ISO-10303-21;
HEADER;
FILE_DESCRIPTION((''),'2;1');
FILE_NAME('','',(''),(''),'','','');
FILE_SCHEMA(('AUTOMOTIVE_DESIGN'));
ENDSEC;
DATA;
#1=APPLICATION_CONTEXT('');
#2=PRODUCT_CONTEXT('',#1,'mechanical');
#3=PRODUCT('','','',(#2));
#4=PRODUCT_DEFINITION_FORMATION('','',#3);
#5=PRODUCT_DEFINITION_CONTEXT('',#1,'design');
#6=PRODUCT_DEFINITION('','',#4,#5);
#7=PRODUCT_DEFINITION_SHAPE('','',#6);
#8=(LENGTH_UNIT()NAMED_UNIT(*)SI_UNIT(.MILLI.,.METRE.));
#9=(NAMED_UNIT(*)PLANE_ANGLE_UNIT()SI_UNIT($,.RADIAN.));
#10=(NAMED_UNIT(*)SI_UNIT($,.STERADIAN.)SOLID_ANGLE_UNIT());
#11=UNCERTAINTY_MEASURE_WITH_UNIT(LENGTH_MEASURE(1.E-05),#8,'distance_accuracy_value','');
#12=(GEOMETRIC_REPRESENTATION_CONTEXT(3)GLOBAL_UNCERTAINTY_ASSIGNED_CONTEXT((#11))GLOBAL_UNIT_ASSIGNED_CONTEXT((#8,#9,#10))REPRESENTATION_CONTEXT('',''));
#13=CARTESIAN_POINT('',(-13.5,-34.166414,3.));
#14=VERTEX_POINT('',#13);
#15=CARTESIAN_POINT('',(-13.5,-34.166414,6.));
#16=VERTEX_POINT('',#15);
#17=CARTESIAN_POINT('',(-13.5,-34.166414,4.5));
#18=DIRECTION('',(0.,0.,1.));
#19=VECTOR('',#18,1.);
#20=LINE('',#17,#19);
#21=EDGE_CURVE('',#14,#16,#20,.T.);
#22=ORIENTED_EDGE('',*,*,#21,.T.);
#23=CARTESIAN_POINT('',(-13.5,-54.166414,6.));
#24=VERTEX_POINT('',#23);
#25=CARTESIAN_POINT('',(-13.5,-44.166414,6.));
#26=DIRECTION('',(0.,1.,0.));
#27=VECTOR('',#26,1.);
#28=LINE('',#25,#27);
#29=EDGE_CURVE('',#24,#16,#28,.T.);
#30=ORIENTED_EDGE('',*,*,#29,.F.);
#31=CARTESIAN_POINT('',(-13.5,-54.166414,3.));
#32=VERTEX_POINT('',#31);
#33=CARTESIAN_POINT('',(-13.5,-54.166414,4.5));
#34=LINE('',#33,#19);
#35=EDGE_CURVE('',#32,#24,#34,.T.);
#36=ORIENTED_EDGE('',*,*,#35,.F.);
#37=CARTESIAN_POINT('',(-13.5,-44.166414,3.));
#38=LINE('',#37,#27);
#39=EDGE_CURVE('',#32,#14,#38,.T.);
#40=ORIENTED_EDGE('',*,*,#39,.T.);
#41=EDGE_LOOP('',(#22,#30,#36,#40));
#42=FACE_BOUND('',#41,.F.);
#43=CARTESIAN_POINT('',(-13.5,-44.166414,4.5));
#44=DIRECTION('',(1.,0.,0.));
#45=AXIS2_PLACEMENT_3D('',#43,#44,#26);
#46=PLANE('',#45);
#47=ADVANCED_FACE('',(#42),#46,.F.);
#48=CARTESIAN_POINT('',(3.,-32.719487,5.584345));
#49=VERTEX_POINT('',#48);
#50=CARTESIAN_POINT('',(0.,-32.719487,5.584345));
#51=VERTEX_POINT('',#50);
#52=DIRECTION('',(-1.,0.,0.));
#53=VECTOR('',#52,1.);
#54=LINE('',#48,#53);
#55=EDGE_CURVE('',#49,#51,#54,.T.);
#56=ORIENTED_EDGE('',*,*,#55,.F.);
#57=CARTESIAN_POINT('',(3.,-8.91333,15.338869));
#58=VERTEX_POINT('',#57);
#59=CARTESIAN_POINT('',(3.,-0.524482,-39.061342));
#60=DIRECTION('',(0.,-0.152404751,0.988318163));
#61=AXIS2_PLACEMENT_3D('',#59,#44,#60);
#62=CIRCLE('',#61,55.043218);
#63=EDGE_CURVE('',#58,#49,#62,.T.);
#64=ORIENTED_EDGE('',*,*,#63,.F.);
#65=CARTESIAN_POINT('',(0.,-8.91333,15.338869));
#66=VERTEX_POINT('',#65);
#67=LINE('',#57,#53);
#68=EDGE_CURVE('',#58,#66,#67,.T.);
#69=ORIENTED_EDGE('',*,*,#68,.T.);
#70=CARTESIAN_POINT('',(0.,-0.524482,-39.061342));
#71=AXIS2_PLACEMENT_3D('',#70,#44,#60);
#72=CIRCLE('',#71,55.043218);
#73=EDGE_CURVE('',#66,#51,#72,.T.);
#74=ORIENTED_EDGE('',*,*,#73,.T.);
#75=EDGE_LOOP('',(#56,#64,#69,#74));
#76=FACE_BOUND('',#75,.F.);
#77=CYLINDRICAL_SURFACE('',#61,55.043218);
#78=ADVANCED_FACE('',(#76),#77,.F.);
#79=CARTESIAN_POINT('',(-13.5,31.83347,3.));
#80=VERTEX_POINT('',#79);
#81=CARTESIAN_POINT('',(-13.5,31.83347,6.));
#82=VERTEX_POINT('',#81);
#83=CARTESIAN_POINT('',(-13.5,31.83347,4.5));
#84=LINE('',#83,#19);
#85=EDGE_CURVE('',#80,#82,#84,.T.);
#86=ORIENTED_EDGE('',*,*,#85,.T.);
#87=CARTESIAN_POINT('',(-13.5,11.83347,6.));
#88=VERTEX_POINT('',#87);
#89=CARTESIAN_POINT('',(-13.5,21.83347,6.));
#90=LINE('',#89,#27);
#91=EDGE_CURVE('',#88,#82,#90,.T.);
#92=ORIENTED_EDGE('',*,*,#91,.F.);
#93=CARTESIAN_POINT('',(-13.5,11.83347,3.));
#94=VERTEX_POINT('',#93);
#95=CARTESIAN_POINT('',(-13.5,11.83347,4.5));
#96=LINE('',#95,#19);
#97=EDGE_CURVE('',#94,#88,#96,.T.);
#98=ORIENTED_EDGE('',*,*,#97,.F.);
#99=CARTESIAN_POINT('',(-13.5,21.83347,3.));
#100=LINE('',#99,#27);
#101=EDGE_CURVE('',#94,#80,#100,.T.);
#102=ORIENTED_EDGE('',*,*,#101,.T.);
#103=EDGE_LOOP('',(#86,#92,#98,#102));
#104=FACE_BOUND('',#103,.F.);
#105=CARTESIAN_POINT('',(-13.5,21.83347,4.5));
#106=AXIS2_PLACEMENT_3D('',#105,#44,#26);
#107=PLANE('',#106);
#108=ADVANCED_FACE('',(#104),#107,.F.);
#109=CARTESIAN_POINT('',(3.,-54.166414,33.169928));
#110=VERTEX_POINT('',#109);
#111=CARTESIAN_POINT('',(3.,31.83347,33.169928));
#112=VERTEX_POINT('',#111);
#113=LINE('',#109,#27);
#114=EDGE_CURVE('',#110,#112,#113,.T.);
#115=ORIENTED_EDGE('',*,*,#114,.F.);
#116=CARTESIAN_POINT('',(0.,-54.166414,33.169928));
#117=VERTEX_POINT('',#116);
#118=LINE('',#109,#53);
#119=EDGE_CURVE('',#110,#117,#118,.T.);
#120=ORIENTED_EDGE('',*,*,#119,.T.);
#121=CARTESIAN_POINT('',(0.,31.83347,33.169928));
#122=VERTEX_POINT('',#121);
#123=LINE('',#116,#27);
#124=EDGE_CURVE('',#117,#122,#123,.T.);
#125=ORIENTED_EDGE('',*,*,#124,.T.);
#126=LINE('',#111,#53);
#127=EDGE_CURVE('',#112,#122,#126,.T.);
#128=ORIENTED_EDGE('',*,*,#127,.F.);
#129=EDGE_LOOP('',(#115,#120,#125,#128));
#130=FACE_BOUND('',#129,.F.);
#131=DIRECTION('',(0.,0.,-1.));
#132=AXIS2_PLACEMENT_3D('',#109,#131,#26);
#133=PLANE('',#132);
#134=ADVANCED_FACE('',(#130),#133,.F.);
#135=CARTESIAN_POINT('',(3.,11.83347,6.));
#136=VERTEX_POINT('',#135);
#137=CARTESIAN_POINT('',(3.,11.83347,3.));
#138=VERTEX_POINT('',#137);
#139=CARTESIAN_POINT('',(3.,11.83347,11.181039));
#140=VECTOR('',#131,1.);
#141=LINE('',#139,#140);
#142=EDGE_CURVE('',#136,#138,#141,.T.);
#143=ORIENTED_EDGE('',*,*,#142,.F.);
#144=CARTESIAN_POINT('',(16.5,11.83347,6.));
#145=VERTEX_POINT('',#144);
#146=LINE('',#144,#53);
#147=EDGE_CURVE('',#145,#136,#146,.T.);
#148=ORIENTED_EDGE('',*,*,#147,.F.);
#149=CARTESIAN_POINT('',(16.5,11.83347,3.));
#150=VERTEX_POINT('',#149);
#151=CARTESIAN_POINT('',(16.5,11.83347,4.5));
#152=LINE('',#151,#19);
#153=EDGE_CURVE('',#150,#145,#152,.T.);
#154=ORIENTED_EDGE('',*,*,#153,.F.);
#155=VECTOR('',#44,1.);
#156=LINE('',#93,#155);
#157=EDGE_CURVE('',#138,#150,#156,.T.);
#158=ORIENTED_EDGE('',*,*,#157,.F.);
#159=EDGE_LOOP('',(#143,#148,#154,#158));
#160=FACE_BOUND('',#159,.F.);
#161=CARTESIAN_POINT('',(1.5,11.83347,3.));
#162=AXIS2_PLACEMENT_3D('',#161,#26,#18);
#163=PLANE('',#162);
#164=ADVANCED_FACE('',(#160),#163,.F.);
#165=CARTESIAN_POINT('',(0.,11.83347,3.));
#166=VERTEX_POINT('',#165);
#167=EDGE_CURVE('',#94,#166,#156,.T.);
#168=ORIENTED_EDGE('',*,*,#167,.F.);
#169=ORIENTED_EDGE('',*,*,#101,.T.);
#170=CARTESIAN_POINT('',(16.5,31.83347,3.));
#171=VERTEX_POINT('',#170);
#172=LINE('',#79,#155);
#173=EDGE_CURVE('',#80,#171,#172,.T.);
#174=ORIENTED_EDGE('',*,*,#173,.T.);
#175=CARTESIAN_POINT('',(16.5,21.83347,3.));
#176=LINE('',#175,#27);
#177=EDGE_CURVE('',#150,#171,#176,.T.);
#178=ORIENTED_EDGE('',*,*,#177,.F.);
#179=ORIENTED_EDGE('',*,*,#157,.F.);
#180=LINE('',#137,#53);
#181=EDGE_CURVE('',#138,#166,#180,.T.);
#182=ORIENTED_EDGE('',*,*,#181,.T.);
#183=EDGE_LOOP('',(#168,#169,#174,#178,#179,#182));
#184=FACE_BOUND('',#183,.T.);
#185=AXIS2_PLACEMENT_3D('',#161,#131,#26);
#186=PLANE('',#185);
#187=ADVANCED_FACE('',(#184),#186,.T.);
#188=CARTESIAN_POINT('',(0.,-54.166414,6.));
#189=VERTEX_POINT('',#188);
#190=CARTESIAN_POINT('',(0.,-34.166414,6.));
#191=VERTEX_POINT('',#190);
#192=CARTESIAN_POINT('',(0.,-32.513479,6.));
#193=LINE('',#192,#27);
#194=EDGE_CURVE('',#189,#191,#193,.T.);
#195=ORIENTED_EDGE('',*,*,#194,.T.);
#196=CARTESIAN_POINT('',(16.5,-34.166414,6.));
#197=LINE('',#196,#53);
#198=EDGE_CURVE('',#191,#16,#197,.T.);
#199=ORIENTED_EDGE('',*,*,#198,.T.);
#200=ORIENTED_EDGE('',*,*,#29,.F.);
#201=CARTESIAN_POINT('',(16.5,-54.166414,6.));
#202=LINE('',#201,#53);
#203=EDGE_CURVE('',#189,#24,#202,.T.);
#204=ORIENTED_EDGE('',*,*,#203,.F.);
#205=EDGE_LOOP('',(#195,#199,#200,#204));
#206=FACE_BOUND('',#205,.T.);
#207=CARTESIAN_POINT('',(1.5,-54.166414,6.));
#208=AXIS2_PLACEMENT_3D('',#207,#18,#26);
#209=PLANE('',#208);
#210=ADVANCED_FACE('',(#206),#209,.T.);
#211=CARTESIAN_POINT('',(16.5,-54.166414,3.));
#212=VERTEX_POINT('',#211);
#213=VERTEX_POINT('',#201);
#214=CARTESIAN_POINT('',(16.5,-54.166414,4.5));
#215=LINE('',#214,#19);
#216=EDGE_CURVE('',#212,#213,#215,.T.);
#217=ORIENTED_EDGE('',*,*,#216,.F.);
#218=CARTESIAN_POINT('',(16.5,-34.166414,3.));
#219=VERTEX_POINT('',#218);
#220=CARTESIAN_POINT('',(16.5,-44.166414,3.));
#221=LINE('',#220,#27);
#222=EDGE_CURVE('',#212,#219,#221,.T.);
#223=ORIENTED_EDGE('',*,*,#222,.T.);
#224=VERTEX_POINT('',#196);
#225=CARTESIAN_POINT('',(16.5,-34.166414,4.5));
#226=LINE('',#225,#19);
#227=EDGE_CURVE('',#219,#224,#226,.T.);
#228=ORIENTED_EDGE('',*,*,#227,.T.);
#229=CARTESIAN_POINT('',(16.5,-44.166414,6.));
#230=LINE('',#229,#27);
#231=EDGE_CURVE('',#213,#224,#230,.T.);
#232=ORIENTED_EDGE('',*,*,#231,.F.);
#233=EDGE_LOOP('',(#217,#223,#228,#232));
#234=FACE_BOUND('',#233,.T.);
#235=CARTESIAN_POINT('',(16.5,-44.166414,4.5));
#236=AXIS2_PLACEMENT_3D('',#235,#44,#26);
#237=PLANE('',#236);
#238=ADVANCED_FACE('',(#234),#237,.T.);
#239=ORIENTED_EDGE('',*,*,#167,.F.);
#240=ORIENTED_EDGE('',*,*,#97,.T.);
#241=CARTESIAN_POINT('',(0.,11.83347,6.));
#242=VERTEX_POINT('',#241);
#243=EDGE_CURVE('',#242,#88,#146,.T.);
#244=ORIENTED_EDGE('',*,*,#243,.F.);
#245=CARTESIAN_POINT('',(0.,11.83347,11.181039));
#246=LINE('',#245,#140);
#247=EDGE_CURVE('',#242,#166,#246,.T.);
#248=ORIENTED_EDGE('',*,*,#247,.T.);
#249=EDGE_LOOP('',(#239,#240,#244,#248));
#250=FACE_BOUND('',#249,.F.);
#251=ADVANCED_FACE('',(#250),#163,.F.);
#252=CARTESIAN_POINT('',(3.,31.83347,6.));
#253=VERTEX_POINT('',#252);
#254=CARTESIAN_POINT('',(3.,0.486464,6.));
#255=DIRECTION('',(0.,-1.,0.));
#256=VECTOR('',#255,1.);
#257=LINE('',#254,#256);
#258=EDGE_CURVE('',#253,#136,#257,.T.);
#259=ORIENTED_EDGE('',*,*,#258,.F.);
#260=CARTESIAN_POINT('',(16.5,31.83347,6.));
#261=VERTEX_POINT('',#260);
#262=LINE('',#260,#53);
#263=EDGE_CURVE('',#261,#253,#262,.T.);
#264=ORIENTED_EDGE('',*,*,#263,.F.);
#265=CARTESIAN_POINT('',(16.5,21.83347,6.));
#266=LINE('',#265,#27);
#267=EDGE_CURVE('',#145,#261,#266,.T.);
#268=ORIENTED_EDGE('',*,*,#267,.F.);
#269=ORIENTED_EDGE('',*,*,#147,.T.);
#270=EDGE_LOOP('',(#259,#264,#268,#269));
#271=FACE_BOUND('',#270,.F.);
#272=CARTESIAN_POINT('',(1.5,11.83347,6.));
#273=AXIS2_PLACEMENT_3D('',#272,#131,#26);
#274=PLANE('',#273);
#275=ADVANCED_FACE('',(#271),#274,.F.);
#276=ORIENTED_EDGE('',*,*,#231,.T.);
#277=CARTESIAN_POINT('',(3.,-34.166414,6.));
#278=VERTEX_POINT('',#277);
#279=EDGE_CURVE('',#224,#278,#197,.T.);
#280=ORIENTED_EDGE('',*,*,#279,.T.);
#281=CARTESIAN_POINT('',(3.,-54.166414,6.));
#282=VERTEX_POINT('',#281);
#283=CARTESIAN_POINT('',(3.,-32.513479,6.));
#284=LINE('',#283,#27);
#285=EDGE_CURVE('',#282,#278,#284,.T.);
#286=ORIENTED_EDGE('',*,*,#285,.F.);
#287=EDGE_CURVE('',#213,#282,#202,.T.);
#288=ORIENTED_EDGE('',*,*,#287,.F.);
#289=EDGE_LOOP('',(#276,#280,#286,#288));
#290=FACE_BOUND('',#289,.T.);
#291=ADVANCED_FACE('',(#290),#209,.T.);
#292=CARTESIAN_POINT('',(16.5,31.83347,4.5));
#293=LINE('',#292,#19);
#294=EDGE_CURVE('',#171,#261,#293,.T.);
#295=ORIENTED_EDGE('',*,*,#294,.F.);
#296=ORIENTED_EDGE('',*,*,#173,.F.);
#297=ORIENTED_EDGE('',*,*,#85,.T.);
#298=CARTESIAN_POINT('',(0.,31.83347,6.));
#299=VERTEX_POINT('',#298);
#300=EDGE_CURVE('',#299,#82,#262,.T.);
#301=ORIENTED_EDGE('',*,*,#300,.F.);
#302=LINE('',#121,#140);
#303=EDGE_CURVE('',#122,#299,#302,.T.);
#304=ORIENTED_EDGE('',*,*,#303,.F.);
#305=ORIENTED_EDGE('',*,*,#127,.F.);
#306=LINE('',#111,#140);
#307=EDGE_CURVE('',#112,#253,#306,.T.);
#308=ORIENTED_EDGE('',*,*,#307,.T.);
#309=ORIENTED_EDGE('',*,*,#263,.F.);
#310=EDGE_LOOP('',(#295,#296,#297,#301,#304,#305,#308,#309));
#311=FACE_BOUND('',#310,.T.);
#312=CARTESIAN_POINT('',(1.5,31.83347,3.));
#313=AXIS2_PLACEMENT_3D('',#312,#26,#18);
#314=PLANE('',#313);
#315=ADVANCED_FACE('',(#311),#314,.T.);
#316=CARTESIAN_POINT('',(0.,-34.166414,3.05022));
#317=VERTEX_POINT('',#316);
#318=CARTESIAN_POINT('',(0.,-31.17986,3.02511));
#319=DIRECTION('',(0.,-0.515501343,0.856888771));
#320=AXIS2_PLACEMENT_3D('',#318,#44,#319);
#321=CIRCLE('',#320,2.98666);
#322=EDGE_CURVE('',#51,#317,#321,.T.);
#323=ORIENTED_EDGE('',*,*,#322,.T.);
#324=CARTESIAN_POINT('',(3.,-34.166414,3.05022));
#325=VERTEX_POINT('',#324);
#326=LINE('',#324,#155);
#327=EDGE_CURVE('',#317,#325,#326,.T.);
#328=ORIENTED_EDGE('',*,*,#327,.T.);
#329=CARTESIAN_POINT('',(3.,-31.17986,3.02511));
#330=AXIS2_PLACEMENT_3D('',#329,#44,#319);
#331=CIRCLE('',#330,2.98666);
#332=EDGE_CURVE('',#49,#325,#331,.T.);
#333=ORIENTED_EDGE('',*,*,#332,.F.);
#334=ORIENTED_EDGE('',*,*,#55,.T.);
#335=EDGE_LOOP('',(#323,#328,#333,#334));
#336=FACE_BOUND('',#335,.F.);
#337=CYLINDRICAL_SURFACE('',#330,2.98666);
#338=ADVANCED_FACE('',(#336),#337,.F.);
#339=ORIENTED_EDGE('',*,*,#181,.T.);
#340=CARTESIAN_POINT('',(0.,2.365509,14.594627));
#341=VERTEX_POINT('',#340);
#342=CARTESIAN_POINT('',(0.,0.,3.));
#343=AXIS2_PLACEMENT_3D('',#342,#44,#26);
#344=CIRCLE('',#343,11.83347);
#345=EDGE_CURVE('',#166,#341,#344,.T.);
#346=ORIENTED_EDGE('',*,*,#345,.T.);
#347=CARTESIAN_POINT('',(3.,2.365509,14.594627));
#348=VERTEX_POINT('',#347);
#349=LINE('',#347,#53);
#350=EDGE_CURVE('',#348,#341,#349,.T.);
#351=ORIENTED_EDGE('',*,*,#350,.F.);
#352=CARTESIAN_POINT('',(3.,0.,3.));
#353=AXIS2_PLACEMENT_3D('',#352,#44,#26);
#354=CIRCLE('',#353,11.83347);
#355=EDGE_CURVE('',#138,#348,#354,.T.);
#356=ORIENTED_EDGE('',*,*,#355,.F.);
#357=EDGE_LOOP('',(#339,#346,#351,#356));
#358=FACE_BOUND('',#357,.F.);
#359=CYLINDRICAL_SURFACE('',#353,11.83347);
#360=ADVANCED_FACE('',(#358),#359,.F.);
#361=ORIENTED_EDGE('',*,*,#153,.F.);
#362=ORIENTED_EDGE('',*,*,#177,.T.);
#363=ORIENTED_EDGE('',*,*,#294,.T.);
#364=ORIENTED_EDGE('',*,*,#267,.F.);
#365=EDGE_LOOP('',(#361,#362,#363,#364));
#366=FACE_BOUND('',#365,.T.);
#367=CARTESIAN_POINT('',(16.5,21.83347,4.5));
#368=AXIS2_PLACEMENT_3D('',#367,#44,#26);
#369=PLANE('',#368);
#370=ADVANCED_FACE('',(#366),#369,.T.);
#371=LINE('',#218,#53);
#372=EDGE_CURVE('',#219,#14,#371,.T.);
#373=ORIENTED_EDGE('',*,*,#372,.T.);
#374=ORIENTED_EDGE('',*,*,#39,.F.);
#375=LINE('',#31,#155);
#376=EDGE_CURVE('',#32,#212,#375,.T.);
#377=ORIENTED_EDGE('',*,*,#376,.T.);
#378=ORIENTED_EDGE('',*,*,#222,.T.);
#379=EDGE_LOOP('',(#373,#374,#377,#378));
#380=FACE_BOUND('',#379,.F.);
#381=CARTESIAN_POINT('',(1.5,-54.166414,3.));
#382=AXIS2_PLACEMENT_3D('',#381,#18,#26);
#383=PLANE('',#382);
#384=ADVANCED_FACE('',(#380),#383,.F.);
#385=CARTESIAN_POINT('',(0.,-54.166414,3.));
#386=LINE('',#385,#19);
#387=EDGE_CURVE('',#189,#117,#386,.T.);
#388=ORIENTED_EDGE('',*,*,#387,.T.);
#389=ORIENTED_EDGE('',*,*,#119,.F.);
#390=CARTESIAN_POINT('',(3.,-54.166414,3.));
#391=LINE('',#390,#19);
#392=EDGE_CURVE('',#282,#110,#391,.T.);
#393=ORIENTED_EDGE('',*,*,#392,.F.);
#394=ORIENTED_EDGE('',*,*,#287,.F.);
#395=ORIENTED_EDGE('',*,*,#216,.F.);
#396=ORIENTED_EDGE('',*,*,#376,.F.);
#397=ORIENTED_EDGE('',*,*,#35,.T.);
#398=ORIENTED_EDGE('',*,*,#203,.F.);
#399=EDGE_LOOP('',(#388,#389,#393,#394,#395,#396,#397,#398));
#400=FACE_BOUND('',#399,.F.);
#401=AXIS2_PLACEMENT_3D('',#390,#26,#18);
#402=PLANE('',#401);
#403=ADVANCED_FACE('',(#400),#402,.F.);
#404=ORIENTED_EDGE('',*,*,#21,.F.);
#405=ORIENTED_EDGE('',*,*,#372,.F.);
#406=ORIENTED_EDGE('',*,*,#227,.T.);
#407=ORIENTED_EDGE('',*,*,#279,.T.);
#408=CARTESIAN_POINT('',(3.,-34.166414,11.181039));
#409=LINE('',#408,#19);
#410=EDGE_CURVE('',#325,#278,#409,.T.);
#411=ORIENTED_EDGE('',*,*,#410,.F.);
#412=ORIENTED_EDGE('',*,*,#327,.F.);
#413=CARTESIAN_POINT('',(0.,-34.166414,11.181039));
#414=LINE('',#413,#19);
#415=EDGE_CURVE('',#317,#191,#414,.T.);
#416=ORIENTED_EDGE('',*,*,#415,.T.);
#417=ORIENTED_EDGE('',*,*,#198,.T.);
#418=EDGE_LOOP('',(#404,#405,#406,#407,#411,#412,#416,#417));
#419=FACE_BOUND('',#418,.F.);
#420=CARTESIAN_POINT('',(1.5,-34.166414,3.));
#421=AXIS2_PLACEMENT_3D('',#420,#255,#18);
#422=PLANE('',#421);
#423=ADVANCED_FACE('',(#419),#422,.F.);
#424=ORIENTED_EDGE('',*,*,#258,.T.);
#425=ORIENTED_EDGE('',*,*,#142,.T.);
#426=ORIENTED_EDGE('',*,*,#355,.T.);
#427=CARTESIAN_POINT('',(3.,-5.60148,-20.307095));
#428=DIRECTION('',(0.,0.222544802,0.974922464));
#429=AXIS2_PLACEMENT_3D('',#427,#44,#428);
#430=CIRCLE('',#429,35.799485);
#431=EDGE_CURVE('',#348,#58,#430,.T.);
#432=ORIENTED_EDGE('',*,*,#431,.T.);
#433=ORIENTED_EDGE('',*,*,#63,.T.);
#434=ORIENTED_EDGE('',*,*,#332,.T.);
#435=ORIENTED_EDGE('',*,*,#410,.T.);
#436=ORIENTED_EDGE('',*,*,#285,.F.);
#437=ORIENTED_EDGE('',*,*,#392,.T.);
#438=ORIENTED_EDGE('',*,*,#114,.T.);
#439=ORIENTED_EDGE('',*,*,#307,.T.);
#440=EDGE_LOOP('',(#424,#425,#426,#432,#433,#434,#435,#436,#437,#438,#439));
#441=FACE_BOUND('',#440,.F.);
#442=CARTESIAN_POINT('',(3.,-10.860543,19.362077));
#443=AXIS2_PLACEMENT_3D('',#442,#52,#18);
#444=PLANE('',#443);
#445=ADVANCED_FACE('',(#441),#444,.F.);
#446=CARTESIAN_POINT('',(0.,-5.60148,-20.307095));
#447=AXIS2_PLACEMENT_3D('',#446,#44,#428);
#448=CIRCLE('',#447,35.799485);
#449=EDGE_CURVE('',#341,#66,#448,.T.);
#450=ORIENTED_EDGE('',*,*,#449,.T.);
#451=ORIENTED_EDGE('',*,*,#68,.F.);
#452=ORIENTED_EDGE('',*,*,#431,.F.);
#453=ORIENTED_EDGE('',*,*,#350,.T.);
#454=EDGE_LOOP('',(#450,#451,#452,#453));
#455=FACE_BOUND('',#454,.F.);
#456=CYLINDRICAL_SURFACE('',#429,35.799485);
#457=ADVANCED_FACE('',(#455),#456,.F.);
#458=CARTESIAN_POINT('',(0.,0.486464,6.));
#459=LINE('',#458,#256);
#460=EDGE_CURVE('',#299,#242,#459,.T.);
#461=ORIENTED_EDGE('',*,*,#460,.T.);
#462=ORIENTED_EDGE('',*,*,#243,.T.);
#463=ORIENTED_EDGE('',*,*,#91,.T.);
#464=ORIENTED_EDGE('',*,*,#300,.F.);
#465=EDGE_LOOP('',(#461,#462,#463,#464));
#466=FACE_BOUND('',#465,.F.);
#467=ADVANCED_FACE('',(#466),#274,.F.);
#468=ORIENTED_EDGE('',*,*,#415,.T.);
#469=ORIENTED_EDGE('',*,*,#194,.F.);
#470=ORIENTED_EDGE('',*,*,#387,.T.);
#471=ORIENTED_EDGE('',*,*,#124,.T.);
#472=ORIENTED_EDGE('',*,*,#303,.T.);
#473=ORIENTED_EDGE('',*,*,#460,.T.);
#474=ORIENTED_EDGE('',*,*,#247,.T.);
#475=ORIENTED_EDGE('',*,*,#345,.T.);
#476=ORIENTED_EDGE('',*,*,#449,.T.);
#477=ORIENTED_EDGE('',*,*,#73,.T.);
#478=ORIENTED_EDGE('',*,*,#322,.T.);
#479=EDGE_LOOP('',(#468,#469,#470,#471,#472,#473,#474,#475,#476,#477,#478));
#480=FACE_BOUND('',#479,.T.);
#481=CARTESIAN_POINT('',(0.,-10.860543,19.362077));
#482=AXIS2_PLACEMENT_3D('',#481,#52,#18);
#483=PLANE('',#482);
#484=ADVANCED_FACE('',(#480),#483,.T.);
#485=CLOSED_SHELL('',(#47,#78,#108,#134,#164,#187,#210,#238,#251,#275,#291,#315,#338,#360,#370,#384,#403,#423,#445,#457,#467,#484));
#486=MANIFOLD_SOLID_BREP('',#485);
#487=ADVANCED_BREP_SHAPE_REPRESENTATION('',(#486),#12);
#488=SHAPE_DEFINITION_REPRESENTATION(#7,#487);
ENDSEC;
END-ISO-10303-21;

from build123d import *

# Parameters (mm, degrees)
F1_DEPTH = 3
F2_ANGLE = 90
F7_W     = 20
F7_H     = 3
F8_DEPTH = 15


# Not quite as in the source:
# - ends of sketch curves that miss each other by under 0.0002 mm in the source are joined


with BuildPart() as f1:
    # F0 (on Top) → F1 (new body)
    with BuildSketch(Plane.XY):
        with BuildLine():
            ThreePointArc((2.5843454528, -32.7194872419), (1.4841670751, -33.7858704597), (0, -34.1664144431))
            Line((0, -34.1664144431), (0, -54.1664144431))
            Line((0, -54.1664144431), (30.1699284464, -54.1664144431))
            Line((30.1699284464, -54.1664144431), (30.1699284464, 31.83347))
            Line((30.1699284464, 31.83347), (0, 31.83347))
            Line((0, 31.83347), (0, 11.83347))
            ThreePointArc((0, 11.83347), (7.4846118013, 9.165784114), (11.5946270955, 2.3655094074))
            ThreePointArc((11.5946270955, 2.3655094074), (12.4147060347, -3.2443514979), (12.338869311, -8.913329936))
            ThreePointArc((12.338869311, -8.913329936), (8.8720047217, -21.3943156457), (2.5843454528, -32.7194872419))
        make_face()
    extrude(amount=F1_DEPTH)


with BuildPart() as f1_1:
    # F2: moved
    add(f1.part.rotate(Axis((0, -44.1664144431, 3), (0, -1, 0)), F2_ANGLE))

    # F7 (on 3pt) → F8 (join, symmetric)
    with BuildSketch(Plane.YZ.offset(1.5)):
        with Locations((-44.1664144431, 4.5)):
            Rectangle(F7_W, F7_H)
        with Locations((21.83347, 4.5)):
            Rectangle(F7_W, F7_H)
    extrude(amount=F8_DEPTH, both=True)


solid = f1_1.part
